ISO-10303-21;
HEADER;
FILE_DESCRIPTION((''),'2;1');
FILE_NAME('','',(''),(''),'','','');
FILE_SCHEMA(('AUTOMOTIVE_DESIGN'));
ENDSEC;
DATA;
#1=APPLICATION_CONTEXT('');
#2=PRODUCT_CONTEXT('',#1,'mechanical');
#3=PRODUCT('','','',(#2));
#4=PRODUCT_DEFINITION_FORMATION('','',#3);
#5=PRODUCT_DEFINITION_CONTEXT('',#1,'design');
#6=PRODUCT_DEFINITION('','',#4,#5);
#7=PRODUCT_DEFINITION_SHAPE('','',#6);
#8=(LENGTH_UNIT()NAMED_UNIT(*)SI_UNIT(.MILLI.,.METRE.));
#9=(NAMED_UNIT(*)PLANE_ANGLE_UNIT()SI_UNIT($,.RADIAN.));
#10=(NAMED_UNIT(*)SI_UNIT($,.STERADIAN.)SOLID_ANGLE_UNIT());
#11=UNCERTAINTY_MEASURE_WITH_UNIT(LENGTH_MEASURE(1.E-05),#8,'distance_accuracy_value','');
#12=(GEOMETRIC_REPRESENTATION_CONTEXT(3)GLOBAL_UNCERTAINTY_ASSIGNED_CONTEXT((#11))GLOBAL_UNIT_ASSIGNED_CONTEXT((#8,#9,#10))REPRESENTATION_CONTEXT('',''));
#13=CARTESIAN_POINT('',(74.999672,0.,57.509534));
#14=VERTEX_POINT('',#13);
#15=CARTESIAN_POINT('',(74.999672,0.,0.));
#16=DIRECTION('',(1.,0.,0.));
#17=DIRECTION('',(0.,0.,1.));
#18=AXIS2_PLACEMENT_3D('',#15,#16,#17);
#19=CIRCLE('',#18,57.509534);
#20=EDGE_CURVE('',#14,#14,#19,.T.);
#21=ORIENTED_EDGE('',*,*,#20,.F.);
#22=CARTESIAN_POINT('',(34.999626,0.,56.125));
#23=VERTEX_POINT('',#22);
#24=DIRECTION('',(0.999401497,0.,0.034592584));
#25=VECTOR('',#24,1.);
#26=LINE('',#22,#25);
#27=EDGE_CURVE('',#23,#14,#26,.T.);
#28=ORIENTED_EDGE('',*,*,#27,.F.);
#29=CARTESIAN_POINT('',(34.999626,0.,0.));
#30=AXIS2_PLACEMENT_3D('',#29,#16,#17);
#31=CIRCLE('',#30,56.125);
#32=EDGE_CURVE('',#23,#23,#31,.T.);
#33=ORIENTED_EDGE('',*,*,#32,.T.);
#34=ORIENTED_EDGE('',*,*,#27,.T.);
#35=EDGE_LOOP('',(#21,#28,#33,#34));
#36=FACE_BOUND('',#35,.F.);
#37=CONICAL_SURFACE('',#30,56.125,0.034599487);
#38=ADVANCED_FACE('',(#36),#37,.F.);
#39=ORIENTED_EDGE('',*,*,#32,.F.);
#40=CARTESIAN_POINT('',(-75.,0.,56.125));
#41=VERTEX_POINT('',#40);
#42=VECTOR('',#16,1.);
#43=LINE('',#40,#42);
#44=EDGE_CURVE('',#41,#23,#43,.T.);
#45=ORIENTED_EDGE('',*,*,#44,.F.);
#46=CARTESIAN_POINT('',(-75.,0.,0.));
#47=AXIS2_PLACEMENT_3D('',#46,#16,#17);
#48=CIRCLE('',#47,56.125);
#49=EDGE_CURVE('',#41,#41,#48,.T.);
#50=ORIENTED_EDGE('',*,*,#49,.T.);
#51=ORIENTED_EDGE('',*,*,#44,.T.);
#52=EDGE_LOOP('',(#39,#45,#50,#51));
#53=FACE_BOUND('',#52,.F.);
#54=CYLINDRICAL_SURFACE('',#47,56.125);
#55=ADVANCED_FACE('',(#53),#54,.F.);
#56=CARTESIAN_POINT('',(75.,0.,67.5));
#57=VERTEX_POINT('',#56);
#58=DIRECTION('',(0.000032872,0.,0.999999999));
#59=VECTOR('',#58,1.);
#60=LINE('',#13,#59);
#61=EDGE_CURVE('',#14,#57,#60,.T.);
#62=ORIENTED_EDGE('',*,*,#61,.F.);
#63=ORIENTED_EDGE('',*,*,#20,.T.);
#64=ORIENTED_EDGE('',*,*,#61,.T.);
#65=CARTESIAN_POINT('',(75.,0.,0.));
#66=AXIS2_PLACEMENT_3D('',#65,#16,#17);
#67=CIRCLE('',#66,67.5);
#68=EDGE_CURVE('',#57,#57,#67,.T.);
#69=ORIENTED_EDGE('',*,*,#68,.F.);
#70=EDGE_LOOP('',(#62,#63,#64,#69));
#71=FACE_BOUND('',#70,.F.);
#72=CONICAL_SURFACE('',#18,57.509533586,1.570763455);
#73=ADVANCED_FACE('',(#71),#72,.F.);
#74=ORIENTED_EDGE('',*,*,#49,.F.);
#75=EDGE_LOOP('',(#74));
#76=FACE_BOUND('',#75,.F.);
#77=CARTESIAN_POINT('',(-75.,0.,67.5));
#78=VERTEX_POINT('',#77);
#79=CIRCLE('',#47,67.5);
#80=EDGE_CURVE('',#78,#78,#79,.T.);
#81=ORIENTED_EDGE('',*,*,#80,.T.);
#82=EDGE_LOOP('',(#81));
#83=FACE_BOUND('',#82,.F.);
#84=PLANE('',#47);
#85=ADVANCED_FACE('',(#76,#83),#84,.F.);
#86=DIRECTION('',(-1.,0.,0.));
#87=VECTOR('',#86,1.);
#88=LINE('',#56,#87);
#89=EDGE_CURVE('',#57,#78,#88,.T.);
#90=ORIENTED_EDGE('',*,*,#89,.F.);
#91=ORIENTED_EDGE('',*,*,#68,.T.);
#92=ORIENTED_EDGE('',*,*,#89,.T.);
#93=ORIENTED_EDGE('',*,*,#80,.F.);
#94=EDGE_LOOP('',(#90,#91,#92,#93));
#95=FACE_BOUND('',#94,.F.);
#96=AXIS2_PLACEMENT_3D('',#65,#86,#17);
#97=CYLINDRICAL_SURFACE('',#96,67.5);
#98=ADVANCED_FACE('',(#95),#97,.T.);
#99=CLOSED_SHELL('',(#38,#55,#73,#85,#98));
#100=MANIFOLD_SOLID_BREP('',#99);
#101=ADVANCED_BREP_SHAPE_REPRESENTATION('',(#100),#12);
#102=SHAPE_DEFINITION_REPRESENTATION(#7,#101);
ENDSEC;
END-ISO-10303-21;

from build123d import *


# Not quite as in the source:
# - ends of sketch curves that miss each other by under 0.0002 mm in the source are joined


with BuildPart() as f1:
    # F0 (on Front) → F1 (revolve)
    with BuildSketch(Plane.XZ):
        Polygon((34.999999978, 67.5), (-75, 67.5), (-75, 56.125), (34.9996260565, 56.125), align=None)
        Polygon((75, 67.5), (34.999999978, 67.5), (34.9996260565, 56.125), (74.9996715909, 57.5095335858), align=None)
    revolve(axis=Axis((0, 0, 0), (1, 0, 0)))


solid = f1.part
